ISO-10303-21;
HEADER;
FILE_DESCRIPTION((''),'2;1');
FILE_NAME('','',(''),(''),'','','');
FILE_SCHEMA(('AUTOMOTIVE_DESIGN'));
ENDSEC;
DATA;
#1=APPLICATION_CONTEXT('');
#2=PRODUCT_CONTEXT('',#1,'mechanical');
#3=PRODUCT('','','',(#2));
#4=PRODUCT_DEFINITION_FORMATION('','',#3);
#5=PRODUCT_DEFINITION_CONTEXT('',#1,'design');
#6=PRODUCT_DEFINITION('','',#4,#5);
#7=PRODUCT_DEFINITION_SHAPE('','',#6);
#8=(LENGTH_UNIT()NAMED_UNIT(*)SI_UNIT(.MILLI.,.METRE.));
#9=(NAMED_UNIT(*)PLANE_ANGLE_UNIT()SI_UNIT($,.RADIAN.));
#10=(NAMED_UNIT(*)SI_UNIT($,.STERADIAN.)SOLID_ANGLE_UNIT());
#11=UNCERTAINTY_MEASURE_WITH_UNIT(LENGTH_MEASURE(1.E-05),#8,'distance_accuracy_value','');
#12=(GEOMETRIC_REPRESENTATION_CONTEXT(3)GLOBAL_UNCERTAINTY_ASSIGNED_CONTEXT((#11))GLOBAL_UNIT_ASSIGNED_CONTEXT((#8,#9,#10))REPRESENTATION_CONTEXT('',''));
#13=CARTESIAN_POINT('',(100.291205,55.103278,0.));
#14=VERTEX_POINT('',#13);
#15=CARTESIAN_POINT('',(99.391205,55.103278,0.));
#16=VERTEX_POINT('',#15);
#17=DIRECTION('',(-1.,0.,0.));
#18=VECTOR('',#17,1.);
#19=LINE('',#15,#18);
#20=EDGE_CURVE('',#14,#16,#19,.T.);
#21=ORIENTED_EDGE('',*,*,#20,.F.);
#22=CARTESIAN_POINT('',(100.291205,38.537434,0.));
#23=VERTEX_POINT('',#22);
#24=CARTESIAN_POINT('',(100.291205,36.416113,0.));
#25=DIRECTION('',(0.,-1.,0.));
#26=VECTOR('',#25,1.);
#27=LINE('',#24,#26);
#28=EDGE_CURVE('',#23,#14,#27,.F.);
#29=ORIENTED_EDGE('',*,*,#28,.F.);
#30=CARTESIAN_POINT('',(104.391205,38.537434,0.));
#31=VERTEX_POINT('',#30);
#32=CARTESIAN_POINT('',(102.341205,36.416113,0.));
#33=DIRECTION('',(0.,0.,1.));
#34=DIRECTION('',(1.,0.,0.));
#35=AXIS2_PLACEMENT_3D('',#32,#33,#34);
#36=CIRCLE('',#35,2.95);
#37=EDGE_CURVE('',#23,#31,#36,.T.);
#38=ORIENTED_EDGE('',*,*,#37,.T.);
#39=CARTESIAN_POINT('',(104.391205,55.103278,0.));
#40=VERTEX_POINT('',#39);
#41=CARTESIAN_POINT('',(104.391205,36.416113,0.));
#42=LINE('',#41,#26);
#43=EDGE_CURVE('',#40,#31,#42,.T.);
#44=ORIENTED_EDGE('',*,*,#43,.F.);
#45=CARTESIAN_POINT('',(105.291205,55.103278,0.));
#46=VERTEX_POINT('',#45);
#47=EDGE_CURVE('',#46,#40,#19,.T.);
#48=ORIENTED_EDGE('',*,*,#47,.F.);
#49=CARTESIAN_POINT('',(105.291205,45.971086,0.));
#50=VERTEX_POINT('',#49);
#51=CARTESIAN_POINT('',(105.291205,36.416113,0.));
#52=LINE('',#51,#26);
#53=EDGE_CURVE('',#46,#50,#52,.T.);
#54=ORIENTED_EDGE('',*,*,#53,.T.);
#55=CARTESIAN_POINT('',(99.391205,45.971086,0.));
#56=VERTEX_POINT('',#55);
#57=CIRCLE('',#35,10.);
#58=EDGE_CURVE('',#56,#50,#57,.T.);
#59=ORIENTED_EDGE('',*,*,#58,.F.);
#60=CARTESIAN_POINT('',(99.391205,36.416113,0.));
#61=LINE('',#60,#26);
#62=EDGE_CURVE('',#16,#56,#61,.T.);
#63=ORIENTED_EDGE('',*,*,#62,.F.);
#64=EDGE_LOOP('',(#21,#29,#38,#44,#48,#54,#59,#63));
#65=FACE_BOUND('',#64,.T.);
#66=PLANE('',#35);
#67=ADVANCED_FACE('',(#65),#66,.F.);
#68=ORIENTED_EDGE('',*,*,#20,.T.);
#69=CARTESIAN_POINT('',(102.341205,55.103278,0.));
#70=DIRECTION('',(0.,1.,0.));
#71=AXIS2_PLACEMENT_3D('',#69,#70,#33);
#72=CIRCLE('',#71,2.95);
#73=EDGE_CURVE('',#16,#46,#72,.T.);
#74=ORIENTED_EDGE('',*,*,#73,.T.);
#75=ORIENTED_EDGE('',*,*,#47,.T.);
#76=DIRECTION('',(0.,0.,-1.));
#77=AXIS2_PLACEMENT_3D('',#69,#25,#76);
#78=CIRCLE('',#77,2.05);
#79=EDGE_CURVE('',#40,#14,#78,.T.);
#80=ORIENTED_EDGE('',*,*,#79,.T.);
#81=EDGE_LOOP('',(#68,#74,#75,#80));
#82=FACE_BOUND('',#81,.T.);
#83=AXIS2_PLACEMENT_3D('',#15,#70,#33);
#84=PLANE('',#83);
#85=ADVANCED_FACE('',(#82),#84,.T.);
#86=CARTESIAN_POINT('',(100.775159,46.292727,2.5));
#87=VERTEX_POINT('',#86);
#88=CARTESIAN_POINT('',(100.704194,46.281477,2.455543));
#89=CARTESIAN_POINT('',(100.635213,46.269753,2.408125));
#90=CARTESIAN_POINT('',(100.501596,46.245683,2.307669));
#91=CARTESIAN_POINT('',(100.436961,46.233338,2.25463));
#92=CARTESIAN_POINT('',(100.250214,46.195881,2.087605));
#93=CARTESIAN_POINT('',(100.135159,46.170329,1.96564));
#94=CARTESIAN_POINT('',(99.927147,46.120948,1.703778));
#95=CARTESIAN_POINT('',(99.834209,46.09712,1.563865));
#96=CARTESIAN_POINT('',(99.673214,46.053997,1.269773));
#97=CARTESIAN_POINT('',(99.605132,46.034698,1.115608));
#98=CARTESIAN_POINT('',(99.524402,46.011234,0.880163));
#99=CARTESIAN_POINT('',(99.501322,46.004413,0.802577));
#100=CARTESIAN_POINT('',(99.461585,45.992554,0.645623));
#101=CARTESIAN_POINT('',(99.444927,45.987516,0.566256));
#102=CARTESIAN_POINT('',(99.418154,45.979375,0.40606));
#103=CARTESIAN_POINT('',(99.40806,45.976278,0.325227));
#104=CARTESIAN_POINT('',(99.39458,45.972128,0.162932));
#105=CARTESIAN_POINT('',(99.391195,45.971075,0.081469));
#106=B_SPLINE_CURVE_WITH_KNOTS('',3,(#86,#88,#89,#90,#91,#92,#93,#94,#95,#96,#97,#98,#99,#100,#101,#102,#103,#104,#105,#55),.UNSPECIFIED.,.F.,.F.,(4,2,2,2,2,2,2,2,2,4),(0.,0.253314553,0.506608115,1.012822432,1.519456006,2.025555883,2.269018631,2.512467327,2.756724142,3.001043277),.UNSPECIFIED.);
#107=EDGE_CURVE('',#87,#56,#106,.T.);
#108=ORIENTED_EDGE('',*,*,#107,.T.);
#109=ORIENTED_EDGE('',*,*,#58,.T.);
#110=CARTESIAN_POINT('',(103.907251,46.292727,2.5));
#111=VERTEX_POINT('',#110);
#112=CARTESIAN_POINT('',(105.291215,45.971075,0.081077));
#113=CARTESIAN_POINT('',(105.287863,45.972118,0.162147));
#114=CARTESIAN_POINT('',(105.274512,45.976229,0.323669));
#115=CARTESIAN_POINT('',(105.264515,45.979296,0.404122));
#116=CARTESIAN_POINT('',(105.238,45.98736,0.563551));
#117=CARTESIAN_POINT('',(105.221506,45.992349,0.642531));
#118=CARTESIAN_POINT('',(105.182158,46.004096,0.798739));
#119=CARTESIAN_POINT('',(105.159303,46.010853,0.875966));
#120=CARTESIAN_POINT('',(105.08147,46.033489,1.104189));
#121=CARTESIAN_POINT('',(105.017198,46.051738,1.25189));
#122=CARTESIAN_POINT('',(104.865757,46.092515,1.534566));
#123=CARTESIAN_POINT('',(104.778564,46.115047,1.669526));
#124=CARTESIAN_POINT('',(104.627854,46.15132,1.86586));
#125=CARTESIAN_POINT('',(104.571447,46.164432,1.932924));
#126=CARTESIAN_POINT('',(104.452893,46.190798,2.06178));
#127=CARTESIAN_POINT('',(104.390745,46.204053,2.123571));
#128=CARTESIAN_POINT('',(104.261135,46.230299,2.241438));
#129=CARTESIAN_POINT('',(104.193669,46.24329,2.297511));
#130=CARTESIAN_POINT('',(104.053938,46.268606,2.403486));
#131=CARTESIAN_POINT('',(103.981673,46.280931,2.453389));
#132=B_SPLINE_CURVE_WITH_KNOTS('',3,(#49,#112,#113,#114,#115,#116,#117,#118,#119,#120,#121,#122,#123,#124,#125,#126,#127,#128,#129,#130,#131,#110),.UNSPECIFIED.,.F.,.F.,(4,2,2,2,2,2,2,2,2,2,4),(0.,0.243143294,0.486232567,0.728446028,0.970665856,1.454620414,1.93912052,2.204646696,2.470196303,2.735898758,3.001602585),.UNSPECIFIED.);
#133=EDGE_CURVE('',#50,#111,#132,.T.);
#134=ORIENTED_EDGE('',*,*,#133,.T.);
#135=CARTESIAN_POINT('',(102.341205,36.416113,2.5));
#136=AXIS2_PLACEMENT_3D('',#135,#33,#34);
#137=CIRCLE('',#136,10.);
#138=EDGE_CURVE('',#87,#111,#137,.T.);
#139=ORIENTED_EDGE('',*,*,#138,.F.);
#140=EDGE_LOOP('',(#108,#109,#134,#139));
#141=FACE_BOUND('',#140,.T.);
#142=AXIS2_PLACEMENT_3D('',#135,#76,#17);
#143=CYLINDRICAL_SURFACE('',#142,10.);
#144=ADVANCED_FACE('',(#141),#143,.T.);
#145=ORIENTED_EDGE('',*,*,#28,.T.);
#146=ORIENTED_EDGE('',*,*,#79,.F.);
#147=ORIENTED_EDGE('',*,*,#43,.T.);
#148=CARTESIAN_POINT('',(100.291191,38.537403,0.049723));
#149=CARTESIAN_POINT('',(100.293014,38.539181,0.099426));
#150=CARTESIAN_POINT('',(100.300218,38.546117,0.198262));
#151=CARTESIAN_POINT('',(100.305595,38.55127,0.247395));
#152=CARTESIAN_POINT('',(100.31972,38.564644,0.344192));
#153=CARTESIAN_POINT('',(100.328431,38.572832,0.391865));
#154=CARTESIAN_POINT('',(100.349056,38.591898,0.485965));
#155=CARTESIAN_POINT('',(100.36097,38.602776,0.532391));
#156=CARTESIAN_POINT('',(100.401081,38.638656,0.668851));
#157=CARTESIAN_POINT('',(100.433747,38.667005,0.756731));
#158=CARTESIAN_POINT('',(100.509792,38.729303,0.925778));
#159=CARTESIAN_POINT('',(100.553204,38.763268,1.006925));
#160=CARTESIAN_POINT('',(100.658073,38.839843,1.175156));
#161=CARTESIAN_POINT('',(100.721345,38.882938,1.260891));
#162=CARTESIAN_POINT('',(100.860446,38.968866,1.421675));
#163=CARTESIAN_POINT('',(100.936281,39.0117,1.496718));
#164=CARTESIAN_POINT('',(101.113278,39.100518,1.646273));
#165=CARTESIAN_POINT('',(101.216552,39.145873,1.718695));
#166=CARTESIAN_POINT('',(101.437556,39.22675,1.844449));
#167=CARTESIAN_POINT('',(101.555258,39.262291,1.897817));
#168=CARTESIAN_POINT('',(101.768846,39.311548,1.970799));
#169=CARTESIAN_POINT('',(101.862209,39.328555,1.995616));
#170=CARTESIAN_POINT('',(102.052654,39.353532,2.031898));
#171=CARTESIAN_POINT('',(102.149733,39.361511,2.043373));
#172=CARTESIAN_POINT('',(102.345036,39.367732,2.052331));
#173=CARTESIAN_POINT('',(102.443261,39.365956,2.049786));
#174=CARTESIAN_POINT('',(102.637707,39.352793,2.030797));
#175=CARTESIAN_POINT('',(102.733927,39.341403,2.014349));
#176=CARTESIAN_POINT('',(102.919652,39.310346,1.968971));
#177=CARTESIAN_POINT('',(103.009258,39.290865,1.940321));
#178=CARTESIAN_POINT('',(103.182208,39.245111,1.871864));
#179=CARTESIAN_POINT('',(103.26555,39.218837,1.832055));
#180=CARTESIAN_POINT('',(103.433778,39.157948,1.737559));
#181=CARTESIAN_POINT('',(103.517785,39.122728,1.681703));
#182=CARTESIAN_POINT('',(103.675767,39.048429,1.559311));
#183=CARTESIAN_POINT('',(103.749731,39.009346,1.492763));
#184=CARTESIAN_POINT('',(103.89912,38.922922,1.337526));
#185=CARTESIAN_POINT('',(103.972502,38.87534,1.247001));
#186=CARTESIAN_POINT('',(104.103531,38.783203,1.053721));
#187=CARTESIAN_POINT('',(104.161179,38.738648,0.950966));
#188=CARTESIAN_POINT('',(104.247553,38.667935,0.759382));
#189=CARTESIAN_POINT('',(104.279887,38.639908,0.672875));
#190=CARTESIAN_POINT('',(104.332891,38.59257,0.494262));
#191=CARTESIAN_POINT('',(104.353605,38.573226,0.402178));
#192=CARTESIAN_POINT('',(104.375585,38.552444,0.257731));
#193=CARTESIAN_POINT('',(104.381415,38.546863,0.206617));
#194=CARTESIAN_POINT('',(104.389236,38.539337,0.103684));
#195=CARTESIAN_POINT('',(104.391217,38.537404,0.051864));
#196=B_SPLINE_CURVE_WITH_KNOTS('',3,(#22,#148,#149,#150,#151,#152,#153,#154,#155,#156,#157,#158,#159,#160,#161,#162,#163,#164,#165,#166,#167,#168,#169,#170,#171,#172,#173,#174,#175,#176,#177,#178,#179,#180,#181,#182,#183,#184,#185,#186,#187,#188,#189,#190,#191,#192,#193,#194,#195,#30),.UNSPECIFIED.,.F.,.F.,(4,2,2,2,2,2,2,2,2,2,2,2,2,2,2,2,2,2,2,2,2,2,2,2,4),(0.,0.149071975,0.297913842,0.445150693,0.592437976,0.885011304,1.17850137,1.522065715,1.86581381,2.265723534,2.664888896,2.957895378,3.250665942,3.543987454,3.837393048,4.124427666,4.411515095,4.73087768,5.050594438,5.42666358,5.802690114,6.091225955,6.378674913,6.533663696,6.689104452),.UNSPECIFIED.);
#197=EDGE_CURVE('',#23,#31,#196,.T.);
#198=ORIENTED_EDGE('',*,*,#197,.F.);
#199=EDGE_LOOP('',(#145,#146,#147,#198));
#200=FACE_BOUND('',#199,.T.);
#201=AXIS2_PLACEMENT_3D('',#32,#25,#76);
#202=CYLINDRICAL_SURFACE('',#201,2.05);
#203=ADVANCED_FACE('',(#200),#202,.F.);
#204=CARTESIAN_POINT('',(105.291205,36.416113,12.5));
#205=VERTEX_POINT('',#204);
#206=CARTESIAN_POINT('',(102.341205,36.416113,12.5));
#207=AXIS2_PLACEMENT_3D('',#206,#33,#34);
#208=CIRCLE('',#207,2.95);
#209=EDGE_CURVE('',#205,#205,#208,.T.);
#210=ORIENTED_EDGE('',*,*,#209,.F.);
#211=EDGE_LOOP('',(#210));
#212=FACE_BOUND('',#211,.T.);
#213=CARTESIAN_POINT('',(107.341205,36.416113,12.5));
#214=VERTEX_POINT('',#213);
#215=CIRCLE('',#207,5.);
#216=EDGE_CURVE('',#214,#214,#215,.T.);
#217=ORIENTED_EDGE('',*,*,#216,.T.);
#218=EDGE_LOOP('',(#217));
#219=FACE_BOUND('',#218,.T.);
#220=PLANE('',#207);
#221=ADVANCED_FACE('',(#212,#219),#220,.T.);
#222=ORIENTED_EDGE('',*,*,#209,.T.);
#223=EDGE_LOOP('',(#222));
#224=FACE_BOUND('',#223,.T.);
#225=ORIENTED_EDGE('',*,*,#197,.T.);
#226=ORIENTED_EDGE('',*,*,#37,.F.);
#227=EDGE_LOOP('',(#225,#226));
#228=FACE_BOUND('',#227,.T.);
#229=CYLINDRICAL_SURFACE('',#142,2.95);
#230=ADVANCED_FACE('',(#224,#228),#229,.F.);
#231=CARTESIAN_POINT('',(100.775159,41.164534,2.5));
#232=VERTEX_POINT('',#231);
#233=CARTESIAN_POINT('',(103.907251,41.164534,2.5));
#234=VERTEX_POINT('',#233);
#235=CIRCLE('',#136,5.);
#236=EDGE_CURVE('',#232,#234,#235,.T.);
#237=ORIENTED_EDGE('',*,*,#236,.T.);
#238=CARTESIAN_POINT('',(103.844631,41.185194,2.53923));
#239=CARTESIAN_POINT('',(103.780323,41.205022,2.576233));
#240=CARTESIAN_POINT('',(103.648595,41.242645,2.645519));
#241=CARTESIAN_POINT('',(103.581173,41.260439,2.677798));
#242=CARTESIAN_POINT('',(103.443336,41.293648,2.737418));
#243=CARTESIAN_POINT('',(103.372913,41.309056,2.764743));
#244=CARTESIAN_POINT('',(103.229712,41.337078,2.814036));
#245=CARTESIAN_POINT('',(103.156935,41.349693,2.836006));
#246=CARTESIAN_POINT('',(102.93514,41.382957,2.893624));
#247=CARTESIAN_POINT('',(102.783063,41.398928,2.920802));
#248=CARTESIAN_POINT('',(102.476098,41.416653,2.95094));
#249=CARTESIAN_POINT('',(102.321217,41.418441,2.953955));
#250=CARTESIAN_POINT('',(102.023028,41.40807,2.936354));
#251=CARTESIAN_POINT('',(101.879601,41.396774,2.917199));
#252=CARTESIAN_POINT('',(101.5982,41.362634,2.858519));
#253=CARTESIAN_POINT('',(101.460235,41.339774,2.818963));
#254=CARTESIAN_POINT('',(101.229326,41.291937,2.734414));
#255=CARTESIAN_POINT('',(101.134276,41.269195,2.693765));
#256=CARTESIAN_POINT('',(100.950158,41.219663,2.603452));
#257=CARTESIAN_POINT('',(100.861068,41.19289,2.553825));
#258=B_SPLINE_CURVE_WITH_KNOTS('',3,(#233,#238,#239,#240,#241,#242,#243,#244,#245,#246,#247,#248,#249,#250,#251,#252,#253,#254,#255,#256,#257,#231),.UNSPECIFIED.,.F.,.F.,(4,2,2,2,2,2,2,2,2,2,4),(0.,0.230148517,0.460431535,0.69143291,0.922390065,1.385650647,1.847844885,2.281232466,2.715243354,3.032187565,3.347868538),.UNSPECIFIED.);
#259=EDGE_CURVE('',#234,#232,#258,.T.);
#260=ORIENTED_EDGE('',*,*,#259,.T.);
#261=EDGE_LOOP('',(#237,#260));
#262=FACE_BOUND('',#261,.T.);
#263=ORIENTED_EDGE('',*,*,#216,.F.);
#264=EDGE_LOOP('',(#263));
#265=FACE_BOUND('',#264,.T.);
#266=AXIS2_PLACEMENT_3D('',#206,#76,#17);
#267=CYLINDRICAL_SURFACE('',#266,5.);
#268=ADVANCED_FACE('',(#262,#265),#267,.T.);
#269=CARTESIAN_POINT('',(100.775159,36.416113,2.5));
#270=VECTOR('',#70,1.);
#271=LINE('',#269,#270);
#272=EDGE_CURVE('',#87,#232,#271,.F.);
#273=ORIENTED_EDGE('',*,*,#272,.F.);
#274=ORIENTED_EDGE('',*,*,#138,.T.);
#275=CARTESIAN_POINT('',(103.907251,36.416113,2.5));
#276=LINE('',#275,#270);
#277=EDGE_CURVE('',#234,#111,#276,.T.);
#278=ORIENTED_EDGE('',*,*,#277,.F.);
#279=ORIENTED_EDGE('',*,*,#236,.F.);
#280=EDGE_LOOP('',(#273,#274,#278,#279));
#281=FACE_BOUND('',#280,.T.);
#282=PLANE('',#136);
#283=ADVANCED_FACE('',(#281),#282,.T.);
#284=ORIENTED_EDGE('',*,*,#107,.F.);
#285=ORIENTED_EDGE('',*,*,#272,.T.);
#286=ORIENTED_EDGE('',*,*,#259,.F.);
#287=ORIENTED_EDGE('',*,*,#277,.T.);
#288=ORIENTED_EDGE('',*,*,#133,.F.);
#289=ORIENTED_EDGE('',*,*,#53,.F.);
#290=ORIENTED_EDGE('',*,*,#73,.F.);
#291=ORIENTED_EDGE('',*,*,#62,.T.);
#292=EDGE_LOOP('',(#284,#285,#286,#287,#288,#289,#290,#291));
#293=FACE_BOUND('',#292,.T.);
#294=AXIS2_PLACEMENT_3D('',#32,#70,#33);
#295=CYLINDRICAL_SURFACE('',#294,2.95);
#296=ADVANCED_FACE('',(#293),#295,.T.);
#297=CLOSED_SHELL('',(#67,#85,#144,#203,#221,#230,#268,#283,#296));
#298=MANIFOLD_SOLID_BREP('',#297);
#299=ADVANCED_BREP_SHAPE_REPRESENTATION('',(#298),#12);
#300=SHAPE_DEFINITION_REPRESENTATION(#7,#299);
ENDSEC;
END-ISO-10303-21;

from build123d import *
from build123d.topology import SkipClean

# Parameters (mm, degrees)
SKETCH1_R           = 10
SKETCH1_R_2         = 2.95
BOSS_EXTRUDE1_DEPTH = 2.5
SKETCH2_R           = 5
SKETCH2_R_2         = 2.95
BOSS_EXTRUDE2_DEPTH = 10
SKETCH7_W           = 2.95
SKETCH7_H           = 18.687164731
REVOLVE7_ANGLE      = 180
SKETCH8_W           = 2.05
SKETCH8_H           = 18.687164731
SKETCH9_R           = 2.95
CUT_EXTRUDE1_DEPTH  = 5


with BuildPart() as part:
    # Sketch1 → Boss-Extrude1 (new body)
    with BuildSketch(Plane.XY):
        with Locations((102.341205301, 36.416113389)):
            Circle(SKETCH1_R)
        with Locations((102.341205301, 36.416113389)):
            Circle(SKETCH1_R_2, mode=Mode.SUBTRACT)
    extrude(amount=BOSS_EXTRUDE1_DEPTH)

    # Sketch2 → Boss-Extrude2 (add)
    with BuildSketch(Plane.XY.offset(2.5)):
        with Locations((102.341205301, 36.416113389)):
            Circle(SKETCH2_R)
        with Locations((102.341205301, 36.416113389)):
            Circle(SKETCH2_R_2, mode=Mode.SUBTRACT)
    extrude(amount=BOSS_EXTRUDE2_DEPTH)

    # Sketch7 → Revolve7 (revolve)
    with BuildSketch(Plane(origin=(0, 0, 0), x_dir=(-1, 0, 0), z_dir=(0, 0, -1))):
        with Locations((-103.816205301, 45.759695755)):
            Rectangle(SKETCH7_W, SKETCH7_H)
    revolve(axis=Axis((102.341205301, 36.416113389, 0), (0, -1, 0)), revolution_arc=REVOLVE7_ANGLE)

    # Sketch8 → Cut-Revolve2 (revolve, cut)
    with BuildSketch(Plane(origin=(0, 0, 0), x_dir=(-1, 0, 0), z_dir=(0, 0, -1))):
        with Locations((-103.366205301, 45.759695755)):
            Rectangle(SKETCH8_W, SKETCH8_H)
    revolve(axis=Axis((102.341205301, 36.416113389, 0), (0, 1, 0)), mode=Mode.SUBTRACT)

    # Sketch9 → Cut-Extrude1 (cut)
    with SkipClean():  # the faces are left unmerged after this step: merging them gives an invalid solid
        with BuildSketch(Plane(origin=(0, 0, 0), x_dir=(-1, 0, 0), z_dir=(0, 0, -1))):
            with Locations((-102.341205301, 36.416113389)):
                Circle(SKETCH9_R)
        extrude(amount=-CUT_EXTRUDE1_DEPTH, mode=Mode.SUBTRACT)


solid = part.part
